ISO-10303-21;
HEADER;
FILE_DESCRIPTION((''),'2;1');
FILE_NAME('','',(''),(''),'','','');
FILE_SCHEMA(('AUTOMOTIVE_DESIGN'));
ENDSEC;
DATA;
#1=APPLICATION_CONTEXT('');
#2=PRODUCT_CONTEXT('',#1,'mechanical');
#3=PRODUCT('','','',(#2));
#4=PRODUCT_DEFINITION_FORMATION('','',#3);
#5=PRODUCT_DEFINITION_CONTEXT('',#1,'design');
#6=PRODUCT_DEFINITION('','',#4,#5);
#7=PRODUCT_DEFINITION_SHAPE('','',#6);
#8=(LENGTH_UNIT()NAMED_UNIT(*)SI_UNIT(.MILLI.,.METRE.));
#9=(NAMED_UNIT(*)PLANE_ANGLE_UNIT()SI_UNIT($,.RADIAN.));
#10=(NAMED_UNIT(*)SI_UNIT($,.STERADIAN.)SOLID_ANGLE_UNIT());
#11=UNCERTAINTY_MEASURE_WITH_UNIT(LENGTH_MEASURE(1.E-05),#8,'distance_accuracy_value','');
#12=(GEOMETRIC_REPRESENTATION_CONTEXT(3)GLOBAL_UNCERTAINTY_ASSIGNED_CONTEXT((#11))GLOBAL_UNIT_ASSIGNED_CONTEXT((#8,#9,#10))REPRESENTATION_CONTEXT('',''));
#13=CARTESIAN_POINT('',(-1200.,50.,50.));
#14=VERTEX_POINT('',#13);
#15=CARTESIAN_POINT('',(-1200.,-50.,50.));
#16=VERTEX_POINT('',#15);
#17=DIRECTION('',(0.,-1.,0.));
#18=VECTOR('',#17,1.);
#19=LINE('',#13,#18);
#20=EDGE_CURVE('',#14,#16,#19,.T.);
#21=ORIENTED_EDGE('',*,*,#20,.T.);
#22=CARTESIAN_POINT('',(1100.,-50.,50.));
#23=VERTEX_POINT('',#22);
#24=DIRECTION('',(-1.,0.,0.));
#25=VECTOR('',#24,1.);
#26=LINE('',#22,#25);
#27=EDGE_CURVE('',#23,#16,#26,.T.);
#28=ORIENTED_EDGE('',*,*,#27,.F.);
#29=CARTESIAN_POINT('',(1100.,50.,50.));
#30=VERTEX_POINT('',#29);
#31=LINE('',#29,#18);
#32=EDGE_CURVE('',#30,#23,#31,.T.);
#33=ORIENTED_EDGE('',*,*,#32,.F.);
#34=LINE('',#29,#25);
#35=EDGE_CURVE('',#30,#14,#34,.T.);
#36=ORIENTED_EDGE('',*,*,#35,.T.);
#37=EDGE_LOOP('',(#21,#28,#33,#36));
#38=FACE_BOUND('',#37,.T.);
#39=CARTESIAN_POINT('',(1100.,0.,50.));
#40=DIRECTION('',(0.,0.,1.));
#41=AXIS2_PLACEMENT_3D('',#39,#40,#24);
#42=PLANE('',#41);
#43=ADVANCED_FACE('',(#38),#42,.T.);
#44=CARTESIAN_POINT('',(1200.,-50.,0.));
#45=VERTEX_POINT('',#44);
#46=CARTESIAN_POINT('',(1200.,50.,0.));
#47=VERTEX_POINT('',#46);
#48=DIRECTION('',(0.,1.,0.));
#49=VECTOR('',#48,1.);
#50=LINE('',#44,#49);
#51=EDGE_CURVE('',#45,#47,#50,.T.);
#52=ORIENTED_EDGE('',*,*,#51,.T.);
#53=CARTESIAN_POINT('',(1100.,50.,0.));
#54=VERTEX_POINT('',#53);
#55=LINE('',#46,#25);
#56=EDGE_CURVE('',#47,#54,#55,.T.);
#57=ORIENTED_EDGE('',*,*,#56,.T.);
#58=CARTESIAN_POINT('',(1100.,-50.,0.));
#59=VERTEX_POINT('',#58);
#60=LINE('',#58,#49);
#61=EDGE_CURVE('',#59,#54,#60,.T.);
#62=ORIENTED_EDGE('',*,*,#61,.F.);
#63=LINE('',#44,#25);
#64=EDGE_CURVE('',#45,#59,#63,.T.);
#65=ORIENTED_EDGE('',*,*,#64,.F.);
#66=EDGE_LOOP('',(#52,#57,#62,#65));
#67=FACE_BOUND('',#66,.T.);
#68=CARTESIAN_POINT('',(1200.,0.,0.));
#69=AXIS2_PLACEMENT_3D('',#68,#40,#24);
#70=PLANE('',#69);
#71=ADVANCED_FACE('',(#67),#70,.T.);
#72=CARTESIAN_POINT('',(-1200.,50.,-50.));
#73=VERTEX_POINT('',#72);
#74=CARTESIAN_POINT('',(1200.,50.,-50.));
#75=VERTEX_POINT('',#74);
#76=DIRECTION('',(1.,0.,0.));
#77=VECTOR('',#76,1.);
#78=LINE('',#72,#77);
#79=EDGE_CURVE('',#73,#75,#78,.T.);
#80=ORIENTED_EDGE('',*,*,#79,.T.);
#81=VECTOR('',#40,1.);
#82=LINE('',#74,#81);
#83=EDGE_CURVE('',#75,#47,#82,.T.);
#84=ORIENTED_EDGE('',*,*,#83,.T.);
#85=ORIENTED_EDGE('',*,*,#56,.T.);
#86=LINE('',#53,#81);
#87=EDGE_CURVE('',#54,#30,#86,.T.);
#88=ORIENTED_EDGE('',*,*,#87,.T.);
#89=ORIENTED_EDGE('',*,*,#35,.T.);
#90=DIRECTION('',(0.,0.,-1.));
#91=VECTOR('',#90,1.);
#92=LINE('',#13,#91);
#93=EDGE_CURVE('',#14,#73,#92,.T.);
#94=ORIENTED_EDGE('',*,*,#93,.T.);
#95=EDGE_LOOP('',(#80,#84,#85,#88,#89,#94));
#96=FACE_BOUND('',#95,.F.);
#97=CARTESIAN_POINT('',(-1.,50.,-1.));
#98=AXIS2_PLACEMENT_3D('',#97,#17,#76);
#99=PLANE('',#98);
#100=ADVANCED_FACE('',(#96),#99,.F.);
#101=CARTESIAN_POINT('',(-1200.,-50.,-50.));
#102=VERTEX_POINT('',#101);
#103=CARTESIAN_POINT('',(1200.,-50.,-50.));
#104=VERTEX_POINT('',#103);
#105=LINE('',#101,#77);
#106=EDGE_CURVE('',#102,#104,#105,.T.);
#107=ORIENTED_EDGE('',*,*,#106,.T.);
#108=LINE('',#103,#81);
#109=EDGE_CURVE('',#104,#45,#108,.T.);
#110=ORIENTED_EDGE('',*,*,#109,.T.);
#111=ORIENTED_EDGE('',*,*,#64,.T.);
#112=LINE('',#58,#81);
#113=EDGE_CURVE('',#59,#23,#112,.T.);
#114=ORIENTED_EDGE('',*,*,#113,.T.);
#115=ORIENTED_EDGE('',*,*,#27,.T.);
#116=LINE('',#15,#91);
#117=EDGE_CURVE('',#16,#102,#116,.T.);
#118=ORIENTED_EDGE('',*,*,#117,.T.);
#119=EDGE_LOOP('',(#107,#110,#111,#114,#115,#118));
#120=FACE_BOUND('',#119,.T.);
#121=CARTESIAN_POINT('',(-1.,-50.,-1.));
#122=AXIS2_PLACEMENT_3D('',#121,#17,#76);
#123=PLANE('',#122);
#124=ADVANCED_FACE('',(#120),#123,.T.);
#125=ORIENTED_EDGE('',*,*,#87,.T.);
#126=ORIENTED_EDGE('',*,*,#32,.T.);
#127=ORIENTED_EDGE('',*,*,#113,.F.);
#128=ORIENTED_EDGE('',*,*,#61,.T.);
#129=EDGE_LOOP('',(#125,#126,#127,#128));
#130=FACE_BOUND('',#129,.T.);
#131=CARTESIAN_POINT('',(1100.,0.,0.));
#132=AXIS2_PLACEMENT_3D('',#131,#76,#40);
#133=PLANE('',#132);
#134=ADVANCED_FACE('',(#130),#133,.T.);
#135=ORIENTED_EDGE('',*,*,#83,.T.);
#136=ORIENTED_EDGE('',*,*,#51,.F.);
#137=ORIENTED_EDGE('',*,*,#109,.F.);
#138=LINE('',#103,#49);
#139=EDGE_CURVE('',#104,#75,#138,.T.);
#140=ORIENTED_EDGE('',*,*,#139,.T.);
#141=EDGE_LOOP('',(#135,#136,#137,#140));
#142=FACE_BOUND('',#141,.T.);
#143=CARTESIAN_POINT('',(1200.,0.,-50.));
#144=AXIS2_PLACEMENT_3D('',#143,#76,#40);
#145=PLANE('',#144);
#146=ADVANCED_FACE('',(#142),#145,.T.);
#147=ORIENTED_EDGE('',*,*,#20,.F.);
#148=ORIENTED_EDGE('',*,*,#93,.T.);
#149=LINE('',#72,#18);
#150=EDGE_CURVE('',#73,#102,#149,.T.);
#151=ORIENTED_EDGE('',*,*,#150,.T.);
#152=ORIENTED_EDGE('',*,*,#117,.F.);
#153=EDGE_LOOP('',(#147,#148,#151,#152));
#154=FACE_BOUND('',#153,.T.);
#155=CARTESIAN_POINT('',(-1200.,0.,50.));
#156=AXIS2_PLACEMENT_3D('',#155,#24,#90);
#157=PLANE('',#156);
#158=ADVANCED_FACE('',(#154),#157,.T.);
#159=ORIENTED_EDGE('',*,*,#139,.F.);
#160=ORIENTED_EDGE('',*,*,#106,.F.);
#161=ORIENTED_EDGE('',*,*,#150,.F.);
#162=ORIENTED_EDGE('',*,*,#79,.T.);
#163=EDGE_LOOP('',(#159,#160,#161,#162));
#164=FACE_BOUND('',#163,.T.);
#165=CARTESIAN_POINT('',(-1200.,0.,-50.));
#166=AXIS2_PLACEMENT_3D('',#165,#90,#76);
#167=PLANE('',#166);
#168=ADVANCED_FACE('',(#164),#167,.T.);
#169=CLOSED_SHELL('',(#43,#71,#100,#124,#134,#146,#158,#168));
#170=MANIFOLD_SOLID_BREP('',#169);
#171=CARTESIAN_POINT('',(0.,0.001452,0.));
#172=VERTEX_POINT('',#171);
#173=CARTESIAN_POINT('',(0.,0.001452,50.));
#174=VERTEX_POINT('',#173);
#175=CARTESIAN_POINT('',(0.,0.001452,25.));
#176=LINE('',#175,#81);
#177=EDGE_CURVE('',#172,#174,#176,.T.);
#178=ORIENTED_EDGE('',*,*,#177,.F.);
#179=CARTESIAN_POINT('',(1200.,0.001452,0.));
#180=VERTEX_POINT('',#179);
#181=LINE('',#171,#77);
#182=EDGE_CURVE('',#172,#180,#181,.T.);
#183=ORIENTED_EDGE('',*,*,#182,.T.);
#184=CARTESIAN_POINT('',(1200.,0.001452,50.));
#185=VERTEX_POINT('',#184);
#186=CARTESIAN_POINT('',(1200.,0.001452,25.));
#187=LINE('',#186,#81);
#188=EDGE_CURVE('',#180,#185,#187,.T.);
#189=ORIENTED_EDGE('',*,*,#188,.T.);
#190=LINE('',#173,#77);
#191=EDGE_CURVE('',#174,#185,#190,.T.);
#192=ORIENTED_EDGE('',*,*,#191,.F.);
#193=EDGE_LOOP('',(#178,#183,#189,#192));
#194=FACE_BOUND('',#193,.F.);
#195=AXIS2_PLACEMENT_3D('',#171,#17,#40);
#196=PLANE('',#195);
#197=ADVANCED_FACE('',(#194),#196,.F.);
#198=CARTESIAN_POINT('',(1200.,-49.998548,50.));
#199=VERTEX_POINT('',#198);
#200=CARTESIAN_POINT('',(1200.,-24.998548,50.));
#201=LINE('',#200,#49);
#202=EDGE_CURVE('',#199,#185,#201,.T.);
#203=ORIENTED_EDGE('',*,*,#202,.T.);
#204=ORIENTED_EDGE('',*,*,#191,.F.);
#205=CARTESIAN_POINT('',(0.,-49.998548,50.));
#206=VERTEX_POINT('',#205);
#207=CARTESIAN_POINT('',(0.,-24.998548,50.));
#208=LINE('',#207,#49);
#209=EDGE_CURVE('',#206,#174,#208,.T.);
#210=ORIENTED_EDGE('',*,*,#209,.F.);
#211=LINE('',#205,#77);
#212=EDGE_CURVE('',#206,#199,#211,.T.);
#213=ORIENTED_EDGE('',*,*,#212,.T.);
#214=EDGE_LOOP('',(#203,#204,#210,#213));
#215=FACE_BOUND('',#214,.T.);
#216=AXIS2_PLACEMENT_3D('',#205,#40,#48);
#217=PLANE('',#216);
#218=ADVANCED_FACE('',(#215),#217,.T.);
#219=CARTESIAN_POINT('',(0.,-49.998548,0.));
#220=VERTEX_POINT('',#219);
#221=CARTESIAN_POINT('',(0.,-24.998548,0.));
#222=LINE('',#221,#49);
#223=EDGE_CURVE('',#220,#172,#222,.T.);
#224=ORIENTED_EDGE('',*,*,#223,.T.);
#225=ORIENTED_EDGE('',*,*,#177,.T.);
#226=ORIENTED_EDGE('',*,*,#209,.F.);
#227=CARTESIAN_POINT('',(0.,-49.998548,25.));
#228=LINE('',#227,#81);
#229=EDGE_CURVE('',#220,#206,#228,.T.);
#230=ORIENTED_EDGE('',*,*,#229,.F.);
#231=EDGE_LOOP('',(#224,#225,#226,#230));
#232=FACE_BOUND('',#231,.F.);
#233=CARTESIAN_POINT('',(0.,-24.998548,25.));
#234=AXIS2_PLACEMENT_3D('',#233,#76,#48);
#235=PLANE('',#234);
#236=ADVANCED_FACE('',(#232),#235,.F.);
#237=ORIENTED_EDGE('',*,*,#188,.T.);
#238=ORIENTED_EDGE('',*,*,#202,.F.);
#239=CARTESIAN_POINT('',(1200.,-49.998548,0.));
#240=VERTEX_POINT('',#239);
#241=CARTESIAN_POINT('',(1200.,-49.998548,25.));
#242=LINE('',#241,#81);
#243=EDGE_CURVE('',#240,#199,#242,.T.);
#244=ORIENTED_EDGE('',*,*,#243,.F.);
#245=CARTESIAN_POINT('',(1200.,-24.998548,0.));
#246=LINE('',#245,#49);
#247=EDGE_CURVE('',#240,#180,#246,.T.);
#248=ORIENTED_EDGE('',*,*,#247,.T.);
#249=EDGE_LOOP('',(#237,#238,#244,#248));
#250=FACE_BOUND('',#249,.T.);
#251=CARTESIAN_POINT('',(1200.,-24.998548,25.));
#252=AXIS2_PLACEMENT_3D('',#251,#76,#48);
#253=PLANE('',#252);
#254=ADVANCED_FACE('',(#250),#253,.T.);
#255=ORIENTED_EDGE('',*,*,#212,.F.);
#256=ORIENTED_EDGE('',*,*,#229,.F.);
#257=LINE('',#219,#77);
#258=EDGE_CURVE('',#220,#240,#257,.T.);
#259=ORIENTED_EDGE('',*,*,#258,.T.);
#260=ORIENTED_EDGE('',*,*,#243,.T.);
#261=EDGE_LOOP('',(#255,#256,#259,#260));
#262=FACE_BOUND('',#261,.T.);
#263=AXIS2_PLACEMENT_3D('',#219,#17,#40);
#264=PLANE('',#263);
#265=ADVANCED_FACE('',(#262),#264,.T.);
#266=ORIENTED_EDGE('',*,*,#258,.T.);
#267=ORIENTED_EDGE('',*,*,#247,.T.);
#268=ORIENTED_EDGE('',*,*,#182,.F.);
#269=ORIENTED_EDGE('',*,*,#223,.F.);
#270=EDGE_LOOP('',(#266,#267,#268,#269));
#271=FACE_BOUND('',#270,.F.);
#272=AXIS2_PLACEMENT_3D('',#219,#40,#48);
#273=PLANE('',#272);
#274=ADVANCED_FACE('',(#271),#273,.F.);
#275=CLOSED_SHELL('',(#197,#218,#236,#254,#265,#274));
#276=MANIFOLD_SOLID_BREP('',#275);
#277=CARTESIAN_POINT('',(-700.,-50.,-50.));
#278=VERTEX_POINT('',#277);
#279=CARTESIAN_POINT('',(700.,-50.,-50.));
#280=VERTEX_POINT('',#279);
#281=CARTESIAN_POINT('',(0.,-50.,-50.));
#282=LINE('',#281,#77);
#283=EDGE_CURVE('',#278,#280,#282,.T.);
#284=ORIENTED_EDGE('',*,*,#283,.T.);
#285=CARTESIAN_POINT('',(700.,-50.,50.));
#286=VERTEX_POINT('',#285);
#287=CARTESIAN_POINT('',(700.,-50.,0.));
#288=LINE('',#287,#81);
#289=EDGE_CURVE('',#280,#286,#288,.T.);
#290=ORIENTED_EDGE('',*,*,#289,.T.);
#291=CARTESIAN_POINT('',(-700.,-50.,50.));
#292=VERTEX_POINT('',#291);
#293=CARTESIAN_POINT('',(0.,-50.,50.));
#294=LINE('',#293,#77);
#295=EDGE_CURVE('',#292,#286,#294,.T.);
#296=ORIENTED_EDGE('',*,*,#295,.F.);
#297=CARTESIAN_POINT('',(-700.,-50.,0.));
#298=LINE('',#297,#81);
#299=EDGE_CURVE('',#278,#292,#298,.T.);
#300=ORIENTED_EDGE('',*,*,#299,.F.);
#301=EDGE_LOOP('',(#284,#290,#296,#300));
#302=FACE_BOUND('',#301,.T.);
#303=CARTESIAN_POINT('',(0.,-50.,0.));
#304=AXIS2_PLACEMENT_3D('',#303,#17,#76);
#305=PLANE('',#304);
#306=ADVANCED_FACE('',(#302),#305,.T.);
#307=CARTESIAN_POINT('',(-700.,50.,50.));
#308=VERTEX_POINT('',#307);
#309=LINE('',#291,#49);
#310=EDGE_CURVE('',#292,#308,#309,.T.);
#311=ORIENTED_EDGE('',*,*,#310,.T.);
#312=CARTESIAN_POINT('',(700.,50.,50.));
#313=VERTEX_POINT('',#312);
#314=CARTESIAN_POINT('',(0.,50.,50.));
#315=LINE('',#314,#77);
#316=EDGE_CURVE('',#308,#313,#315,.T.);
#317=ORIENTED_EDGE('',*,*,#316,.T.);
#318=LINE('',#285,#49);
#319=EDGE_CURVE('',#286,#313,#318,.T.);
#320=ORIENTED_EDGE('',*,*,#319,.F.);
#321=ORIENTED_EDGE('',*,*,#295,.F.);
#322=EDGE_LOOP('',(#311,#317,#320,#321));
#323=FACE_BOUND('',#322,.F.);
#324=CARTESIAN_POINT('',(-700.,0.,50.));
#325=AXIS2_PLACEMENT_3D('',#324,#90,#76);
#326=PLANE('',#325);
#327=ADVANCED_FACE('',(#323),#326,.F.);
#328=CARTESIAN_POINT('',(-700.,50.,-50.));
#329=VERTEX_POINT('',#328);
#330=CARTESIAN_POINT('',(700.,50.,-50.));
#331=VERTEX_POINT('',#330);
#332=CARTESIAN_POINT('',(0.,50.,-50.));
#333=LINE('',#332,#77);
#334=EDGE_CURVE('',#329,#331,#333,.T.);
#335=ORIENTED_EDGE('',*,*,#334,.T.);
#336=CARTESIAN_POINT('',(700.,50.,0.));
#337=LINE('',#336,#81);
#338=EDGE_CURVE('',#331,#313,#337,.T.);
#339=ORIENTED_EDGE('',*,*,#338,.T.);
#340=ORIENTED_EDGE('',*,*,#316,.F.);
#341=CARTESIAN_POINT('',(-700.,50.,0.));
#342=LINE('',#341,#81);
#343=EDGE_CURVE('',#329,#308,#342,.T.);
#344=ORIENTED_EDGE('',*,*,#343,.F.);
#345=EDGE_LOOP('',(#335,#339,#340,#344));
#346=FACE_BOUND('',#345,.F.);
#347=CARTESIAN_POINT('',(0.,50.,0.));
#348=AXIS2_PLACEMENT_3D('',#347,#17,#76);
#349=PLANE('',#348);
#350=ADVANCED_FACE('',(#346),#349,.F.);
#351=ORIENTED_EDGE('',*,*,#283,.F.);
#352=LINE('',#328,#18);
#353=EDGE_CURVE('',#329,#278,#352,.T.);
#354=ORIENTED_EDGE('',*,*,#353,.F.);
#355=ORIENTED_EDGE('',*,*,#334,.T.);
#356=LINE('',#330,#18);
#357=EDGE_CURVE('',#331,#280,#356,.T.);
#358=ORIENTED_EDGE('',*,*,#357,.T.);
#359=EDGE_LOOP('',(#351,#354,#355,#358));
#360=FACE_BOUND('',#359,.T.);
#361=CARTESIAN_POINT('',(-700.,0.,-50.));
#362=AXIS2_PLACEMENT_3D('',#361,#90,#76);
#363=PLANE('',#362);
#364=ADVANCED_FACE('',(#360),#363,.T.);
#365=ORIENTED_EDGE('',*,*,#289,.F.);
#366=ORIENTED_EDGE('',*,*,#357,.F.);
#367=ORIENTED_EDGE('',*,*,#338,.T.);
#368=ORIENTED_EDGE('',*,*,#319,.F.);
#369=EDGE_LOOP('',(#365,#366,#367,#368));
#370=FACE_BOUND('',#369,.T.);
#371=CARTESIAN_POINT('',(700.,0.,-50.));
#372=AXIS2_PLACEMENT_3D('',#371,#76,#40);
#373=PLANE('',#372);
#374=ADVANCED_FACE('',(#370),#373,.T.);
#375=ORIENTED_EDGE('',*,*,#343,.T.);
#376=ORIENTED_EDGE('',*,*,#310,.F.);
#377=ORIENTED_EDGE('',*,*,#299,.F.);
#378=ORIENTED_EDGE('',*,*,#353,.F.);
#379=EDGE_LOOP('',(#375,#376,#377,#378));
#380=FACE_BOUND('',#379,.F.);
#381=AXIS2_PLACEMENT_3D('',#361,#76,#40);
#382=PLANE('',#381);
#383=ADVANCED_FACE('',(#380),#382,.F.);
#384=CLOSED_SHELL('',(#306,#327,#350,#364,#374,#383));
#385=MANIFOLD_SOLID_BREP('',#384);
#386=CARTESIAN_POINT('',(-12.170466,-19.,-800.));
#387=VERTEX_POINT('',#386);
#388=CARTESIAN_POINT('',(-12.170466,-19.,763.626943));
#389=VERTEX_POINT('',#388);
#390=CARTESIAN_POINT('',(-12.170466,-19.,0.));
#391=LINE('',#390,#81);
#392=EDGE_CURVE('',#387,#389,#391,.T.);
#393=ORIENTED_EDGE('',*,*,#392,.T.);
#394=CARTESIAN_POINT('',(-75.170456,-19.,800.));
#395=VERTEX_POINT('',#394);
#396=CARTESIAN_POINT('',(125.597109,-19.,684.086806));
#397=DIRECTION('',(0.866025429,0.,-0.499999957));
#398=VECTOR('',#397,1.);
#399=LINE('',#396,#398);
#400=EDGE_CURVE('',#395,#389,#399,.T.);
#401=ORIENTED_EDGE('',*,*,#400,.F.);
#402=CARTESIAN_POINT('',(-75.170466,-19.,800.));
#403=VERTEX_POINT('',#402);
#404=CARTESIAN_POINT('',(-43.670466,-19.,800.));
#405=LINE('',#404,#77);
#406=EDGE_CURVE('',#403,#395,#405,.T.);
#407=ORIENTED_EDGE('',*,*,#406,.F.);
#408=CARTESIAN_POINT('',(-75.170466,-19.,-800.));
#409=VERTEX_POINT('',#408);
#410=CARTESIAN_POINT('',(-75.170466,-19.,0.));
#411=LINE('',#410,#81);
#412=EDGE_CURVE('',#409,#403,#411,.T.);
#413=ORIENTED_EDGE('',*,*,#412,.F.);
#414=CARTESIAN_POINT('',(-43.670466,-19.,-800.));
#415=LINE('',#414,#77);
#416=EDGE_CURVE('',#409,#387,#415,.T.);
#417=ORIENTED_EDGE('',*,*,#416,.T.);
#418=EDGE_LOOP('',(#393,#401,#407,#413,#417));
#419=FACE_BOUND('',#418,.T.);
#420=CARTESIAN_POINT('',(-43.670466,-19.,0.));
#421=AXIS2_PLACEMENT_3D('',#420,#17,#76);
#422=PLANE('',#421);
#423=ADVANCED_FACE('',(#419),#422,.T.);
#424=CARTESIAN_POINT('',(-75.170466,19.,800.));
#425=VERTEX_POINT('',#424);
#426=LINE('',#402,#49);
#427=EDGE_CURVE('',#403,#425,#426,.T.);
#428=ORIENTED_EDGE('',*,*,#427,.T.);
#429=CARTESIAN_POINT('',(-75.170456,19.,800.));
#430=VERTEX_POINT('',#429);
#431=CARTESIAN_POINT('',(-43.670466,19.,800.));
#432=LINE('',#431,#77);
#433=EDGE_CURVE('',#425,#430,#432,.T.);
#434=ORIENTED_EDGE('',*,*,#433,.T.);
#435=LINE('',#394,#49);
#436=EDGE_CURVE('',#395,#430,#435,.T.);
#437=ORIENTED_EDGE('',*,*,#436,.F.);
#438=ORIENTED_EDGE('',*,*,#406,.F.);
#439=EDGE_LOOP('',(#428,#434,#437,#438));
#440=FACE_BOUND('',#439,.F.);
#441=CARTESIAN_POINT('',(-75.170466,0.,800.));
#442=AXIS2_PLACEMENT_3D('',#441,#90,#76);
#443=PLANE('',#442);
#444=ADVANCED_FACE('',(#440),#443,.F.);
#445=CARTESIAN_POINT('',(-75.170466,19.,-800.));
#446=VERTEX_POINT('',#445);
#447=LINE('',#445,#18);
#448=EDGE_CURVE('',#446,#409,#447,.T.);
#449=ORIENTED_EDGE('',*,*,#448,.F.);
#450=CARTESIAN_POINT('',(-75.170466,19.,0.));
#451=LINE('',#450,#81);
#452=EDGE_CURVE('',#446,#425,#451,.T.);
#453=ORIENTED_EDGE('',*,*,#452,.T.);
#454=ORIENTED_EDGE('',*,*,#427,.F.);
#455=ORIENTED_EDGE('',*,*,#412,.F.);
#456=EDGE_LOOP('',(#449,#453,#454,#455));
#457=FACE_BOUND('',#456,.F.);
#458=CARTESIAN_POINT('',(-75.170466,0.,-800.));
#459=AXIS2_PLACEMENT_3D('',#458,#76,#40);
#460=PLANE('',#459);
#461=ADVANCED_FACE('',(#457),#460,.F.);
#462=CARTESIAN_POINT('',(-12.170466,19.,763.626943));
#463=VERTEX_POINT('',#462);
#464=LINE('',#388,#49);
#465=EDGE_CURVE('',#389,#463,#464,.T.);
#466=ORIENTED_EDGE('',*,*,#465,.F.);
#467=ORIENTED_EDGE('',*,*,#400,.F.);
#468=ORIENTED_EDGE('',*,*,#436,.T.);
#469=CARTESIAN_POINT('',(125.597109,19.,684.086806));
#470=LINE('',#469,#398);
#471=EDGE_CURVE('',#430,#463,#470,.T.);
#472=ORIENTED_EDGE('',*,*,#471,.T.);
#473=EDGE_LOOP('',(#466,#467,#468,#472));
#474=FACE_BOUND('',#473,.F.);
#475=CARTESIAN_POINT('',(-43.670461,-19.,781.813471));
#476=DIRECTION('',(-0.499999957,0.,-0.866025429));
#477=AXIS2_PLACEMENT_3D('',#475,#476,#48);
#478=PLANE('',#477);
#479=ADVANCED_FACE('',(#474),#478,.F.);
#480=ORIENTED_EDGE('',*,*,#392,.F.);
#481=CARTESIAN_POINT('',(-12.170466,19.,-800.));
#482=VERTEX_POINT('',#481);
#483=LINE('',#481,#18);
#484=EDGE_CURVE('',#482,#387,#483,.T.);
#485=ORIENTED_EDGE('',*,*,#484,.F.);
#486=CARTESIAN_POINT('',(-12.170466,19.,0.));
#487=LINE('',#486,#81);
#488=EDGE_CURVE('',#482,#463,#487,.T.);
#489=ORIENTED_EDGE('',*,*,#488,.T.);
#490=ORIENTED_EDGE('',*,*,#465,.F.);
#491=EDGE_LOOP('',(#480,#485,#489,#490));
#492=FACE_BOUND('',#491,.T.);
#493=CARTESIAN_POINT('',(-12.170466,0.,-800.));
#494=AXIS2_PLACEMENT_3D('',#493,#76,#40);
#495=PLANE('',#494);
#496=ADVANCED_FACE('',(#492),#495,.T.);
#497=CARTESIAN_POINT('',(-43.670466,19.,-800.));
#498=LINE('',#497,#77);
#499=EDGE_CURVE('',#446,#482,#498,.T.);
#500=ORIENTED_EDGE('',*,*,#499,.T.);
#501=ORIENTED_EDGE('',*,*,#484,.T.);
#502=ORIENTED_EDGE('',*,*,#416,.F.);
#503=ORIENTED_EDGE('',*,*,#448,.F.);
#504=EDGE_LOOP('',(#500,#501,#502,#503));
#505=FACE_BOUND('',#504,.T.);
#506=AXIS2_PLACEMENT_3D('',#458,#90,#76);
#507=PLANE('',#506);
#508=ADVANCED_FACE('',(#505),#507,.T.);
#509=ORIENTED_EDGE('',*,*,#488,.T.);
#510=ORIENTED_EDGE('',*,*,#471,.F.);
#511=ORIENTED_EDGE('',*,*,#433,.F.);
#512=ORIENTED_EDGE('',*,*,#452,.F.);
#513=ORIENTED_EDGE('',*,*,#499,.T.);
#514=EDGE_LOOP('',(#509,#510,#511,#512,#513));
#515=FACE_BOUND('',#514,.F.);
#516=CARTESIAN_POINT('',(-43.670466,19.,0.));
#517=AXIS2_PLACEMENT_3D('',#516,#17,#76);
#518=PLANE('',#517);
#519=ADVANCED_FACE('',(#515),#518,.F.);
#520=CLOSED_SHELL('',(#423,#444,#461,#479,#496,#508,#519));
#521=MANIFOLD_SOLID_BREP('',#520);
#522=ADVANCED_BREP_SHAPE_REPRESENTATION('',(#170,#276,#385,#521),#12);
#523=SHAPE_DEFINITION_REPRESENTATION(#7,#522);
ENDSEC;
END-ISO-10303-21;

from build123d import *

# Parameters (mm, degrees)
F1_DEPTH = 50
F2_W     = 1400
F2_H     = 100
F3_DEPTH = 50
F4_W     = 63
F4_H     = 1600
F5_DEPTH = 19
F6_SIZE2 = 36.373057
F6_SIZE  = 62.99999
F7_W     = 50
F7_H     = 50
F8_DEPTH = 1200


# Not quite as in the source:
# - a fillet or chamfer is up to 0.001 mm smaller than in the source, because OpenCascade refuses the exact size


with BuildPart() as f1:
    # F0 (on Front) → F1 (new body, symmetric)
    with BuildSketch(Plane.XZ):
        Polygon((1100, 0), (1100, 50), (-1200, 50), (-1200, -50), (1200, -50), (1200, 0), align=None)
    extrude(amount=F1_DEPTH, both=True)


with BuildPart() as f3:
    # F2 (on Front) → F3 (new body, symmetric)
    with BuildSketch(Plane.XZ):
        Rectangle(F2_W, F2_H)
    extrude(amount=F3_DEPTH, both=True)


with BuildPart() as f5:
    # F4 (on Front) → F5 (new body, symmetric)
    with BuildSketch(Plane.XZ):
        with Locations((-43.6704657625, 0)):
            Rectangle(F4_W, F4_H)
    extrude(amount=F5_DEPTH, both=True)

    # F6 (size 63 and 36.3730669589 in the source; OpenCascade refuses exactly that, so slightly less here)
    f6_edges = [f5.edges().sort_by_distance(p)[0] for p in [
        (-12.170466, 0, 800),
    ]]
    f6_side = f5.faces().sort_by_distance((-43.670466, 0, 800))[0]
    chamfer(f6_edges, length=F6_SIZE, length2=F6_SIZE2, reference=f6_side)


with BuildPart() as f8:
    # F7 (on Right) → F8 (new body)
    with BuildSketch(Plane.YZ):
        with Locations((-24.9985475093, 25)):
            Rectangle(F7_W, F7_H)
    extrude(amount=F8_DEPTH)


solid = Compound([f1.part, f3.part, f5.part, f8.part])
